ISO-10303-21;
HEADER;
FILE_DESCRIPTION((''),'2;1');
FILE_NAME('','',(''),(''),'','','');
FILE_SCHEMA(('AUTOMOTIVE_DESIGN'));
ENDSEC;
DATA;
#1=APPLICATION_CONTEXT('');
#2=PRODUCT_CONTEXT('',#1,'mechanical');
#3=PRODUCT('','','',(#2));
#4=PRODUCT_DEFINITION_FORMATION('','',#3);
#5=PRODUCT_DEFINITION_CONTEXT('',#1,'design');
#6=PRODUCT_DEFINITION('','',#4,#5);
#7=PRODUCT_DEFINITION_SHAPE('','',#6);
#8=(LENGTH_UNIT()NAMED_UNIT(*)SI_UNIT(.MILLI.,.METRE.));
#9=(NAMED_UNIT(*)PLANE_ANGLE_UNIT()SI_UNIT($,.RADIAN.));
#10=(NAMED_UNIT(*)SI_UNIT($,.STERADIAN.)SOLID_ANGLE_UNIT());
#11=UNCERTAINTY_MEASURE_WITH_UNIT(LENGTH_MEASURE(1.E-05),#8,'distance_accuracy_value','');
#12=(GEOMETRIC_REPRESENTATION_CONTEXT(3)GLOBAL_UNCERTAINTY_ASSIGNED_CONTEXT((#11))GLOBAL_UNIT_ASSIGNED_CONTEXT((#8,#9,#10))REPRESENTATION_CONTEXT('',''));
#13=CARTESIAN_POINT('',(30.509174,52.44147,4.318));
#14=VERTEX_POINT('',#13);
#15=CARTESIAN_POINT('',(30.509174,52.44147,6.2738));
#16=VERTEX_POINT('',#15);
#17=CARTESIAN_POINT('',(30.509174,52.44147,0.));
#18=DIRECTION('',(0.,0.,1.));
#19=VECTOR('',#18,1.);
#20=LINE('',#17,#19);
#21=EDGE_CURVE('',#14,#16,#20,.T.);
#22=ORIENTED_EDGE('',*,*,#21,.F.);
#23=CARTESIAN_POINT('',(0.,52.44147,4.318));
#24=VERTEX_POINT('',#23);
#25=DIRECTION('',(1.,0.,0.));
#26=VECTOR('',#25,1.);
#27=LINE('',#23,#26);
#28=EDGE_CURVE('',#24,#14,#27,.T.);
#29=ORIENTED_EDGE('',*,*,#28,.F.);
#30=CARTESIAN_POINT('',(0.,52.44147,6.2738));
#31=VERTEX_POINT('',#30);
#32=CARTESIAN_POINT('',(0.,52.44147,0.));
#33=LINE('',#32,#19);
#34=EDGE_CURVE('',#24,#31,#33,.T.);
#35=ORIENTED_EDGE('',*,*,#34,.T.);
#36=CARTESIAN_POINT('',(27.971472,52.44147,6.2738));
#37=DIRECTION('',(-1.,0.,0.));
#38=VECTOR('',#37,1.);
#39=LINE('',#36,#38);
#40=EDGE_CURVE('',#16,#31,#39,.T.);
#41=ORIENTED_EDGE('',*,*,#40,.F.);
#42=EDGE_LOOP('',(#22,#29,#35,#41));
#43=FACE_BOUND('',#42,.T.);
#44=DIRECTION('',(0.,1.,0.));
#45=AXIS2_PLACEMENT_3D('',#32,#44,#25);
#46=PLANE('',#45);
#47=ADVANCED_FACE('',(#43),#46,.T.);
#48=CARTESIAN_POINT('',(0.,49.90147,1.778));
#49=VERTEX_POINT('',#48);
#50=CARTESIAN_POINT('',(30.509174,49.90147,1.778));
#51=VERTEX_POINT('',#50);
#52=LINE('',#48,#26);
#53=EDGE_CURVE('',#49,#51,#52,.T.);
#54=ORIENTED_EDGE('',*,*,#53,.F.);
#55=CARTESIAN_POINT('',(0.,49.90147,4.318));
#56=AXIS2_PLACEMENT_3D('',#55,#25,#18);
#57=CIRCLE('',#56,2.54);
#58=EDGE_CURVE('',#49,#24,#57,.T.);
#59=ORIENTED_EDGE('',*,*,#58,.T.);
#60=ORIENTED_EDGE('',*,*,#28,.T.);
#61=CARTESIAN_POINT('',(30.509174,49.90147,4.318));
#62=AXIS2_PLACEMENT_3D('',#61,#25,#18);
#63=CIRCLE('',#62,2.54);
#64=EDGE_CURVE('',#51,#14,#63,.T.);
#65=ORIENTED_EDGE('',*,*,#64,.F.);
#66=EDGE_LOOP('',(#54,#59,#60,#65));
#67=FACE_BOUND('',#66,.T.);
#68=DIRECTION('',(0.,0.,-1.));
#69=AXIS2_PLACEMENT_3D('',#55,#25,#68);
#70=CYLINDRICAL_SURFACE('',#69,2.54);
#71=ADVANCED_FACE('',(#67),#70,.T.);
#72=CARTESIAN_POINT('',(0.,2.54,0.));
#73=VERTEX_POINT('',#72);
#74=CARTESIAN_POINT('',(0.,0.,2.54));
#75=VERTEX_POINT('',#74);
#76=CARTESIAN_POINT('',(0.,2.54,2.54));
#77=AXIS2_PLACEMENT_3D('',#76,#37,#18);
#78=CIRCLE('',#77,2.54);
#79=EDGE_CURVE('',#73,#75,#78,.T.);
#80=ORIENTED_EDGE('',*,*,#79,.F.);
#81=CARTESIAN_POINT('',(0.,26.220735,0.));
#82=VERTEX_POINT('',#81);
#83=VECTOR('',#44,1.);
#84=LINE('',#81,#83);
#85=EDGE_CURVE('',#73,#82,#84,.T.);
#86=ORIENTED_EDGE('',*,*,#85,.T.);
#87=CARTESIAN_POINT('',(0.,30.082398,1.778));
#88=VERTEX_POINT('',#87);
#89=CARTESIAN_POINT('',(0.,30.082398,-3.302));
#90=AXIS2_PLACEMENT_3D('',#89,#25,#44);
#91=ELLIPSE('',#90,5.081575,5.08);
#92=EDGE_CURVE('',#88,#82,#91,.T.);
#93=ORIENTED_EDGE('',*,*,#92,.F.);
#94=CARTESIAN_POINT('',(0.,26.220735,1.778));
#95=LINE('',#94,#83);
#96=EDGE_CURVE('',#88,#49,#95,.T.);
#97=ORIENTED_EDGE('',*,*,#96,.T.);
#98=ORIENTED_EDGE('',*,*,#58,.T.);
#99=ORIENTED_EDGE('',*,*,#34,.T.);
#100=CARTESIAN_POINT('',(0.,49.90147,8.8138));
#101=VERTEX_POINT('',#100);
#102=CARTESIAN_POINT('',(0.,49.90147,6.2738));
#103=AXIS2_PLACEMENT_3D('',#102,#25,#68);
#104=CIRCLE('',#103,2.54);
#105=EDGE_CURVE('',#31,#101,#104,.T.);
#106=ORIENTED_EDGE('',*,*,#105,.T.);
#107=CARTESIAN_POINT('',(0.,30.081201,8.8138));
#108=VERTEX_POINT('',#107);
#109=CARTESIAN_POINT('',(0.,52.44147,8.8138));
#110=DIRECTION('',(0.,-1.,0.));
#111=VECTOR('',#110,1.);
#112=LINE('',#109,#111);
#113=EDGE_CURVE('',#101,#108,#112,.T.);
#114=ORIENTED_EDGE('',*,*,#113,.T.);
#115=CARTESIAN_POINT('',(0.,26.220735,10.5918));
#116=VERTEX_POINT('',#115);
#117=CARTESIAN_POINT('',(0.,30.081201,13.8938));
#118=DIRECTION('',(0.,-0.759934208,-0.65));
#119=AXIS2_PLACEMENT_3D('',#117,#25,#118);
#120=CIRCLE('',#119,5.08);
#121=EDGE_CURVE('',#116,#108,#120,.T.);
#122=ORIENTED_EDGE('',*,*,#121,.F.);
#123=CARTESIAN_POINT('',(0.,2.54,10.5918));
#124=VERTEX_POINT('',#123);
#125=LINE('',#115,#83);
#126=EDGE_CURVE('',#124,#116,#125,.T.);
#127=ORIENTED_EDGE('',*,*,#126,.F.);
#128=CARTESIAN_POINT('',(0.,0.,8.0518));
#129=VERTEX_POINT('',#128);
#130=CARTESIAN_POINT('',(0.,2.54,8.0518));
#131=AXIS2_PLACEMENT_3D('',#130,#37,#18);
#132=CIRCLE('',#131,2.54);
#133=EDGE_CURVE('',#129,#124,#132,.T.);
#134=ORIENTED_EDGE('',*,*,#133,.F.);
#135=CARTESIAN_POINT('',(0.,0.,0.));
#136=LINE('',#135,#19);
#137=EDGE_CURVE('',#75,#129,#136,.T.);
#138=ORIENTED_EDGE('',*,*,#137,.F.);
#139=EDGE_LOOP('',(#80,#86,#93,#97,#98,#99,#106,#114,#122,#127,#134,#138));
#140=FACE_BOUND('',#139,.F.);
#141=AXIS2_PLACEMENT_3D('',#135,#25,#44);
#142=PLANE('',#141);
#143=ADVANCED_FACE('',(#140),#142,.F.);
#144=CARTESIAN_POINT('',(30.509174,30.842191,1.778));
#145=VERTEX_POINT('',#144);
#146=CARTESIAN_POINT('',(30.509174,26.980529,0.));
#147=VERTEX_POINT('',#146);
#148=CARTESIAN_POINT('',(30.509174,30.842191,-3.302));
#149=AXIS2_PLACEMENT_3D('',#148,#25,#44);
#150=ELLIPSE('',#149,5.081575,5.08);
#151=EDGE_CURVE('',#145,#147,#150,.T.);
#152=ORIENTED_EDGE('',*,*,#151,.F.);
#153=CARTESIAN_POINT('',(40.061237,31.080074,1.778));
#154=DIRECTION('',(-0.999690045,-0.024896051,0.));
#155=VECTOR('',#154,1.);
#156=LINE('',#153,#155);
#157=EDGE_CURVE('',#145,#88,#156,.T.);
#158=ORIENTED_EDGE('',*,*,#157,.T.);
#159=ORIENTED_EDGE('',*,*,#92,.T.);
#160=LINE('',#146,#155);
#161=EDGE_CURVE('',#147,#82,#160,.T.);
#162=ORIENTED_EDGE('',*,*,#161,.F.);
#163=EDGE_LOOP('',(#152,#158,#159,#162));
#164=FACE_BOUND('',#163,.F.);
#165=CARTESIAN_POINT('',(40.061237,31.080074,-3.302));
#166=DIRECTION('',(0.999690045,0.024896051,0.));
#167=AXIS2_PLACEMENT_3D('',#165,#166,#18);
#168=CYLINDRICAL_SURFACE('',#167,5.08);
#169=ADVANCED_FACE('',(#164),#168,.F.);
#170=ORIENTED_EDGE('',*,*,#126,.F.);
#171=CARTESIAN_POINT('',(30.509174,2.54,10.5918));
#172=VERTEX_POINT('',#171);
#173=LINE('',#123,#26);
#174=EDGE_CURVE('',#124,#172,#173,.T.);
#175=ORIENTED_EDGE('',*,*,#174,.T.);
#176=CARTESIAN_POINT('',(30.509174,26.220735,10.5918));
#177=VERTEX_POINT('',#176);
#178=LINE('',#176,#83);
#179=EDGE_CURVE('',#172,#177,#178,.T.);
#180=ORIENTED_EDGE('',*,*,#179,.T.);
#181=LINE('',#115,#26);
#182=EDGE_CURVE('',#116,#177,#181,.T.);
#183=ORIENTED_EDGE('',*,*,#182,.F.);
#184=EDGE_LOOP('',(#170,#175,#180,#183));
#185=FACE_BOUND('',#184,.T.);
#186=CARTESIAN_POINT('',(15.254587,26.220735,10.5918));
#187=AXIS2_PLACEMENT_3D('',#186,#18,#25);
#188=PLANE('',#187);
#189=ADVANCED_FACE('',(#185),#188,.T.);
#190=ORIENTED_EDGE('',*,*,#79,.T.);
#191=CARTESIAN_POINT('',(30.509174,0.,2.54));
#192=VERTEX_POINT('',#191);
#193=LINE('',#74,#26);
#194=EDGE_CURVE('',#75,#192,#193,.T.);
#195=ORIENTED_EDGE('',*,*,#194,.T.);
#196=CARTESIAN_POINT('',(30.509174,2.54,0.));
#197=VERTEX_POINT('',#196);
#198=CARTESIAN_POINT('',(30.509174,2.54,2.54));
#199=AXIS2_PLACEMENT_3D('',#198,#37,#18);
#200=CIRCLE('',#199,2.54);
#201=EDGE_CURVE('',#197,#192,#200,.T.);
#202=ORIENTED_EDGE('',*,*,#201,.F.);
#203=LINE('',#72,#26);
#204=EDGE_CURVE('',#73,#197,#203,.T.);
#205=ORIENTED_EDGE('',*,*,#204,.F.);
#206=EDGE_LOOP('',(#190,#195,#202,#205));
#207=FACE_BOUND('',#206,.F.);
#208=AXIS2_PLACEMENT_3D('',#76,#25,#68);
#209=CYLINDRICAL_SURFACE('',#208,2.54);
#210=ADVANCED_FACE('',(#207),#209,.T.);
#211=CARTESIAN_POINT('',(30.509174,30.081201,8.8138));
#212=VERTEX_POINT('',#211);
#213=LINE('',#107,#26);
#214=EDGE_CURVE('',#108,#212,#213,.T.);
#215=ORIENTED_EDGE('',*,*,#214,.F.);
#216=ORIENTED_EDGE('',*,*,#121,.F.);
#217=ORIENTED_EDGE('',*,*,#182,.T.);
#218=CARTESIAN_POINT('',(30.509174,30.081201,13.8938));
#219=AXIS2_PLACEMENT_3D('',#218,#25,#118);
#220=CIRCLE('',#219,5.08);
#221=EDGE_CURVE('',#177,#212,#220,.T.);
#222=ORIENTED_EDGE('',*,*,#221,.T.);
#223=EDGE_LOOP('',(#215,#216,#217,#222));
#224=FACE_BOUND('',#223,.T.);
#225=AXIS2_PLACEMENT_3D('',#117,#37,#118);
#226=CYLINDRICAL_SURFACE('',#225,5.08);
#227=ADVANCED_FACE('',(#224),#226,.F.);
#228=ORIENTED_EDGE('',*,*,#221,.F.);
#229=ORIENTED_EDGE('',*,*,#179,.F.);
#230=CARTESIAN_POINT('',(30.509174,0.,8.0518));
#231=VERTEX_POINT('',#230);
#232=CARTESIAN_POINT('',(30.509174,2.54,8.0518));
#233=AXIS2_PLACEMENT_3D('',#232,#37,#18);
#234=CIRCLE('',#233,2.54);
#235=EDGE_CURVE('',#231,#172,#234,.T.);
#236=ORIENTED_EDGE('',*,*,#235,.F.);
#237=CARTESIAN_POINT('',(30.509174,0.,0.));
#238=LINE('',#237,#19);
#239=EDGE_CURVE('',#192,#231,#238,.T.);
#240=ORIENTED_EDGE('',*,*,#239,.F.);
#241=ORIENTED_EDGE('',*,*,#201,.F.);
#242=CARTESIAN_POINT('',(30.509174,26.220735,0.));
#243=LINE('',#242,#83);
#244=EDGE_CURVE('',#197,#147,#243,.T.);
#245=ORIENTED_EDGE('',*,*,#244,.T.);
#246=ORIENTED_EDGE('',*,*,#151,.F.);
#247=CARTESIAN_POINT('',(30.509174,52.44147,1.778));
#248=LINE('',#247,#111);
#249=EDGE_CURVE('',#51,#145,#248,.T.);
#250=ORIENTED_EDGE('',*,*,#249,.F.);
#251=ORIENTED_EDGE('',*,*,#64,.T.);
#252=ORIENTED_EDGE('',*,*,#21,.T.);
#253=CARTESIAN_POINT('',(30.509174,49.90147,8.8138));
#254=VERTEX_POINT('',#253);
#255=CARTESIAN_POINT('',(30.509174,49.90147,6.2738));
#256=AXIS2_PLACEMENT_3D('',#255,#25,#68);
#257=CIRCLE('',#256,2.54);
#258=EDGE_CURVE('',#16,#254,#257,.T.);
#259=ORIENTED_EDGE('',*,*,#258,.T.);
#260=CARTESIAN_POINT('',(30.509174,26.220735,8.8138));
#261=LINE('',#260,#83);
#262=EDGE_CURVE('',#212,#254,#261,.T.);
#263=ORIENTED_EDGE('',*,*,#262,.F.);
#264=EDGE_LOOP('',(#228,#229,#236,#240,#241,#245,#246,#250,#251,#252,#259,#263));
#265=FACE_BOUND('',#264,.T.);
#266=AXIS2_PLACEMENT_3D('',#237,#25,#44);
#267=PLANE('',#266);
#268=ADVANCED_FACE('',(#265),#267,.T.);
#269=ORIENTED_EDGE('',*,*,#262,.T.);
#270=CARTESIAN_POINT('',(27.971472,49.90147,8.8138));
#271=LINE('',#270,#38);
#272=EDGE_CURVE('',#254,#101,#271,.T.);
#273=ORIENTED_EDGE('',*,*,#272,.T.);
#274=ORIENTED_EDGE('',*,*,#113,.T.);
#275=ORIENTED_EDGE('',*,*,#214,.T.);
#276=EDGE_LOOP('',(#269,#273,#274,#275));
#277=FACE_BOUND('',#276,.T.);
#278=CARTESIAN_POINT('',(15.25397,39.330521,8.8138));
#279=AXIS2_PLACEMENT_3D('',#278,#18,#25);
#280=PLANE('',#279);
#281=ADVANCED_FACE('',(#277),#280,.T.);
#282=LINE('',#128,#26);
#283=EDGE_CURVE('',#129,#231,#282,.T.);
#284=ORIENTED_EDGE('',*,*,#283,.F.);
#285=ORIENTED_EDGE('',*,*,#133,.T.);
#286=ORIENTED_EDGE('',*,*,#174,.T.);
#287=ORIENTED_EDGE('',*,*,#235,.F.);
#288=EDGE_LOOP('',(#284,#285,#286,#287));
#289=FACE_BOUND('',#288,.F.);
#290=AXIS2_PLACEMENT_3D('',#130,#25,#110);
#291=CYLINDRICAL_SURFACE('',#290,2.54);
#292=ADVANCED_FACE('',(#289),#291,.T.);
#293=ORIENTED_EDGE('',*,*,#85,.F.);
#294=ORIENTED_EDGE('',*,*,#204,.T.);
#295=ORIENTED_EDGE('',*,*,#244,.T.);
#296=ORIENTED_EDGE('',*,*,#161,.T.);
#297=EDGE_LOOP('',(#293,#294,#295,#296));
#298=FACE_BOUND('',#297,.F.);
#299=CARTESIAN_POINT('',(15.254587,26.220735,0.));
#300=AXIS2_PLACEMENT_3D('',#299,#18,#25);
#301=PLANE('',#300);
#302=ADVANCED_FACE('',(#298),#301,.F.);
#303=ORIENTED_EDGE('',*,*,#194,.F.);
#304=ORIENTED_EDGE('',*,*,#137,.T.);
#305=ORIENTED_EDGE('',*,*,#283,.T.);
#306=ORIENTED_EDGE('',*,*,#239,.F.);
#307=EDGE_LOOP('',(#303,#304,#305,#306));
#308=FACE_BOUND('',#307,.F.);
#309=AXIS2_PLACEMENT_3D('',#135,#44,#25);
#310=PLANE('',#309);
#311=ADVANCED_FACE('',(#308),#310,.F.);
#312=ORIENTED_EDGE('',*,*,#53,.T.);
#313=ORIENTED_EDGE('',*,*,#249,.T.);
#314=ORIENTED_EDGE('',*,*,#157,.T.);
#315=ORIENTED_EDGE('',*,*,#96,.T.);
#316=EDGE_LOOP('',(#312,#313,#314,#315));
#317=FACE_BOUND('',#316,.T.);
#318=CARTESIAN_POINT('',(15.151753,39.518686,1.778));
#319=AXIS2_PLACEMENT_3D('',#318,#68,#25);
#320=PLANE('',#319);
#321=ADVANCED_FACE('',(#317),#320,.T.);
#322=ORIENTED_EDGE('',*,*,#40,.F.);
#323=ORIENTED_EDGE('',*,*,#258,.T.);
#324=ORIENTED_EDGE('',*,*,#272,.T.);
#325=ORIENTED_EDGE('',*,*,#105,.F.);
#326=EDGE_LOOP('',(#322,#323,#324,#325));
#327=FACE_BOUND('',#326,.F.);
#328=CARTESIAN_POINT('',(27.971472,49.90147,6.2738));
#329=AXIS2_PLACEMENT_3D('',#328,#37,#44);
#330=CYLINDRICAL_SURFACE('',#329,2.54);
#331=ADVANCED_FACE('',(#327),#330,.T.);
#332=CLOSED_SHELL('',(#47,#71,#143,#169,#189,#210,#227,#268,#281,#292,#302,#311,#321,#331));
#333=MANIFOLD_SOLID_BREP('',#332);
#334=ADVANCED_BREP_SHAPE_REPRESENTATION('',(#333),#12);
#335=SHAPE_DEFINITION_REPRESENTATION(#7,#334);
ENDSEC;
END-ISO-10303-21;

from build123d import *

# Parameters (mm, degrees)
F0_W        = 30.5091738701
F0_H        = 52.441470325
F1_DEPTH    = 10.5918
F3_DEPTH    = 1.778
F5_DEPTH    = 1.778
F6_T1_DEPTH = 30.5091738701
F6_T6_DEPTH = 49.8209621392
F7_R        = 2.54


# Not quite as in the source:
# - a fillet or chamfer that OpenCascade refuses, or shapes differently, is made with other operations: its cross-section is extruded or revolved along the edge and cut away or added


with BuildPart() as f1:
    # F0 (on Top) → F1 (new body)
    with BuildSketch(Plane.XY):
        with Locations((15.254586935, 26.2207351625)):
            Rectangle(F0_W, F0_H)
    extrude(amount=F1_DEPTH)

    # F2 (on face) → F3 (cut)
    with BuildSketch(Plane.XY.offset(10.5918)):
        Polygon((27.9714719847, 52.441470325), (0, 52.441470325), (0, 27.7975574136), (0, 26.2207351625), (30.5091738701, 26.2207351625), (30.5091738701, 52.4368782499), align=None)
    extrude(amount=-F3_DEPTH, mode=Mode.SUBTRACT)

    # F4 (on face) → F5 (cut)
    with BuildSketch(Plane(origin=(0, 0, 0), x_dir=(1, 0, 0), z_dir=(0, 0, -1))):
        Polygon((30.5091738701, -26.980528608), (0, -26.2207351625), (0, -52.441470325), (30.5091738701, -52.441470325), align=None)
    extrude(amount=-F5_DEPTH, mode=Mode.SUBTRACT)

    # F6: fillet of radius 5.08 on 2 edges, made by hand

    # F6_s2 → F6_t1 (join)
    with BuildSketch(Plane.YZ):
        with BuildLine():
            ThreePointArc((26.2207351625, 10.5918), (27.9560844701, 9.2796608604), (30.0812009375, 8.8138))
            Line((30.0812009375, 8.8138), (26.2207351625, 8.8138))
            Line((26.2207351625, 8.8138), (26.2207351625, 10.5918))
        make_face()
    extrude(amount=F6_T1_DEPTH)


with BuildPart() as f6_tool4:
    # F6_s5 → F6_t6 (new body)
    with BuildSketch(Plane(origin=(40.8099373033, 1.0163212877, 0), x_dir=(0, 0, 1), z_dir=(-0.9996900453, -0.0248960508, 0))):
        with BuildLine():
            ThreePointArc((1.778, 30.0730736971), (1.3121391396, 27.9479572297), (0, 26.2126079221))
            Line((0, 26.2126079221), (1.778, 26.2126079221))
            Line((1.778, 26.2126079221), (1.778, 30.0730736971))
        make_face()
    extrude(amount=F6_T6_DEPTH)

    split(bisect_by=Plane.YZ, keep=Keep.TOP)

    split(bisect_by=Plane.YZ.offset(30.5091738701), keep=Keep.BOTTOM)


with BuildPart() as f1_1:
    add(f1.part)

    # F6_t3: union F6_tool4
    add(f6_tool4.part)

    # F7
    f7_edges = [f1_1.edges().sort_by_distance(p)[0] for p in [
        (15.254587, 52.44147, 1.778),
        (15.254587, 0, 0),
        (15.254587, 0, 10.5918),
        (13.985736, 52.44147, 8.8138),
    ]]
    fillet(f7_edges, radius=F7_R)


solid = f1_1.part
